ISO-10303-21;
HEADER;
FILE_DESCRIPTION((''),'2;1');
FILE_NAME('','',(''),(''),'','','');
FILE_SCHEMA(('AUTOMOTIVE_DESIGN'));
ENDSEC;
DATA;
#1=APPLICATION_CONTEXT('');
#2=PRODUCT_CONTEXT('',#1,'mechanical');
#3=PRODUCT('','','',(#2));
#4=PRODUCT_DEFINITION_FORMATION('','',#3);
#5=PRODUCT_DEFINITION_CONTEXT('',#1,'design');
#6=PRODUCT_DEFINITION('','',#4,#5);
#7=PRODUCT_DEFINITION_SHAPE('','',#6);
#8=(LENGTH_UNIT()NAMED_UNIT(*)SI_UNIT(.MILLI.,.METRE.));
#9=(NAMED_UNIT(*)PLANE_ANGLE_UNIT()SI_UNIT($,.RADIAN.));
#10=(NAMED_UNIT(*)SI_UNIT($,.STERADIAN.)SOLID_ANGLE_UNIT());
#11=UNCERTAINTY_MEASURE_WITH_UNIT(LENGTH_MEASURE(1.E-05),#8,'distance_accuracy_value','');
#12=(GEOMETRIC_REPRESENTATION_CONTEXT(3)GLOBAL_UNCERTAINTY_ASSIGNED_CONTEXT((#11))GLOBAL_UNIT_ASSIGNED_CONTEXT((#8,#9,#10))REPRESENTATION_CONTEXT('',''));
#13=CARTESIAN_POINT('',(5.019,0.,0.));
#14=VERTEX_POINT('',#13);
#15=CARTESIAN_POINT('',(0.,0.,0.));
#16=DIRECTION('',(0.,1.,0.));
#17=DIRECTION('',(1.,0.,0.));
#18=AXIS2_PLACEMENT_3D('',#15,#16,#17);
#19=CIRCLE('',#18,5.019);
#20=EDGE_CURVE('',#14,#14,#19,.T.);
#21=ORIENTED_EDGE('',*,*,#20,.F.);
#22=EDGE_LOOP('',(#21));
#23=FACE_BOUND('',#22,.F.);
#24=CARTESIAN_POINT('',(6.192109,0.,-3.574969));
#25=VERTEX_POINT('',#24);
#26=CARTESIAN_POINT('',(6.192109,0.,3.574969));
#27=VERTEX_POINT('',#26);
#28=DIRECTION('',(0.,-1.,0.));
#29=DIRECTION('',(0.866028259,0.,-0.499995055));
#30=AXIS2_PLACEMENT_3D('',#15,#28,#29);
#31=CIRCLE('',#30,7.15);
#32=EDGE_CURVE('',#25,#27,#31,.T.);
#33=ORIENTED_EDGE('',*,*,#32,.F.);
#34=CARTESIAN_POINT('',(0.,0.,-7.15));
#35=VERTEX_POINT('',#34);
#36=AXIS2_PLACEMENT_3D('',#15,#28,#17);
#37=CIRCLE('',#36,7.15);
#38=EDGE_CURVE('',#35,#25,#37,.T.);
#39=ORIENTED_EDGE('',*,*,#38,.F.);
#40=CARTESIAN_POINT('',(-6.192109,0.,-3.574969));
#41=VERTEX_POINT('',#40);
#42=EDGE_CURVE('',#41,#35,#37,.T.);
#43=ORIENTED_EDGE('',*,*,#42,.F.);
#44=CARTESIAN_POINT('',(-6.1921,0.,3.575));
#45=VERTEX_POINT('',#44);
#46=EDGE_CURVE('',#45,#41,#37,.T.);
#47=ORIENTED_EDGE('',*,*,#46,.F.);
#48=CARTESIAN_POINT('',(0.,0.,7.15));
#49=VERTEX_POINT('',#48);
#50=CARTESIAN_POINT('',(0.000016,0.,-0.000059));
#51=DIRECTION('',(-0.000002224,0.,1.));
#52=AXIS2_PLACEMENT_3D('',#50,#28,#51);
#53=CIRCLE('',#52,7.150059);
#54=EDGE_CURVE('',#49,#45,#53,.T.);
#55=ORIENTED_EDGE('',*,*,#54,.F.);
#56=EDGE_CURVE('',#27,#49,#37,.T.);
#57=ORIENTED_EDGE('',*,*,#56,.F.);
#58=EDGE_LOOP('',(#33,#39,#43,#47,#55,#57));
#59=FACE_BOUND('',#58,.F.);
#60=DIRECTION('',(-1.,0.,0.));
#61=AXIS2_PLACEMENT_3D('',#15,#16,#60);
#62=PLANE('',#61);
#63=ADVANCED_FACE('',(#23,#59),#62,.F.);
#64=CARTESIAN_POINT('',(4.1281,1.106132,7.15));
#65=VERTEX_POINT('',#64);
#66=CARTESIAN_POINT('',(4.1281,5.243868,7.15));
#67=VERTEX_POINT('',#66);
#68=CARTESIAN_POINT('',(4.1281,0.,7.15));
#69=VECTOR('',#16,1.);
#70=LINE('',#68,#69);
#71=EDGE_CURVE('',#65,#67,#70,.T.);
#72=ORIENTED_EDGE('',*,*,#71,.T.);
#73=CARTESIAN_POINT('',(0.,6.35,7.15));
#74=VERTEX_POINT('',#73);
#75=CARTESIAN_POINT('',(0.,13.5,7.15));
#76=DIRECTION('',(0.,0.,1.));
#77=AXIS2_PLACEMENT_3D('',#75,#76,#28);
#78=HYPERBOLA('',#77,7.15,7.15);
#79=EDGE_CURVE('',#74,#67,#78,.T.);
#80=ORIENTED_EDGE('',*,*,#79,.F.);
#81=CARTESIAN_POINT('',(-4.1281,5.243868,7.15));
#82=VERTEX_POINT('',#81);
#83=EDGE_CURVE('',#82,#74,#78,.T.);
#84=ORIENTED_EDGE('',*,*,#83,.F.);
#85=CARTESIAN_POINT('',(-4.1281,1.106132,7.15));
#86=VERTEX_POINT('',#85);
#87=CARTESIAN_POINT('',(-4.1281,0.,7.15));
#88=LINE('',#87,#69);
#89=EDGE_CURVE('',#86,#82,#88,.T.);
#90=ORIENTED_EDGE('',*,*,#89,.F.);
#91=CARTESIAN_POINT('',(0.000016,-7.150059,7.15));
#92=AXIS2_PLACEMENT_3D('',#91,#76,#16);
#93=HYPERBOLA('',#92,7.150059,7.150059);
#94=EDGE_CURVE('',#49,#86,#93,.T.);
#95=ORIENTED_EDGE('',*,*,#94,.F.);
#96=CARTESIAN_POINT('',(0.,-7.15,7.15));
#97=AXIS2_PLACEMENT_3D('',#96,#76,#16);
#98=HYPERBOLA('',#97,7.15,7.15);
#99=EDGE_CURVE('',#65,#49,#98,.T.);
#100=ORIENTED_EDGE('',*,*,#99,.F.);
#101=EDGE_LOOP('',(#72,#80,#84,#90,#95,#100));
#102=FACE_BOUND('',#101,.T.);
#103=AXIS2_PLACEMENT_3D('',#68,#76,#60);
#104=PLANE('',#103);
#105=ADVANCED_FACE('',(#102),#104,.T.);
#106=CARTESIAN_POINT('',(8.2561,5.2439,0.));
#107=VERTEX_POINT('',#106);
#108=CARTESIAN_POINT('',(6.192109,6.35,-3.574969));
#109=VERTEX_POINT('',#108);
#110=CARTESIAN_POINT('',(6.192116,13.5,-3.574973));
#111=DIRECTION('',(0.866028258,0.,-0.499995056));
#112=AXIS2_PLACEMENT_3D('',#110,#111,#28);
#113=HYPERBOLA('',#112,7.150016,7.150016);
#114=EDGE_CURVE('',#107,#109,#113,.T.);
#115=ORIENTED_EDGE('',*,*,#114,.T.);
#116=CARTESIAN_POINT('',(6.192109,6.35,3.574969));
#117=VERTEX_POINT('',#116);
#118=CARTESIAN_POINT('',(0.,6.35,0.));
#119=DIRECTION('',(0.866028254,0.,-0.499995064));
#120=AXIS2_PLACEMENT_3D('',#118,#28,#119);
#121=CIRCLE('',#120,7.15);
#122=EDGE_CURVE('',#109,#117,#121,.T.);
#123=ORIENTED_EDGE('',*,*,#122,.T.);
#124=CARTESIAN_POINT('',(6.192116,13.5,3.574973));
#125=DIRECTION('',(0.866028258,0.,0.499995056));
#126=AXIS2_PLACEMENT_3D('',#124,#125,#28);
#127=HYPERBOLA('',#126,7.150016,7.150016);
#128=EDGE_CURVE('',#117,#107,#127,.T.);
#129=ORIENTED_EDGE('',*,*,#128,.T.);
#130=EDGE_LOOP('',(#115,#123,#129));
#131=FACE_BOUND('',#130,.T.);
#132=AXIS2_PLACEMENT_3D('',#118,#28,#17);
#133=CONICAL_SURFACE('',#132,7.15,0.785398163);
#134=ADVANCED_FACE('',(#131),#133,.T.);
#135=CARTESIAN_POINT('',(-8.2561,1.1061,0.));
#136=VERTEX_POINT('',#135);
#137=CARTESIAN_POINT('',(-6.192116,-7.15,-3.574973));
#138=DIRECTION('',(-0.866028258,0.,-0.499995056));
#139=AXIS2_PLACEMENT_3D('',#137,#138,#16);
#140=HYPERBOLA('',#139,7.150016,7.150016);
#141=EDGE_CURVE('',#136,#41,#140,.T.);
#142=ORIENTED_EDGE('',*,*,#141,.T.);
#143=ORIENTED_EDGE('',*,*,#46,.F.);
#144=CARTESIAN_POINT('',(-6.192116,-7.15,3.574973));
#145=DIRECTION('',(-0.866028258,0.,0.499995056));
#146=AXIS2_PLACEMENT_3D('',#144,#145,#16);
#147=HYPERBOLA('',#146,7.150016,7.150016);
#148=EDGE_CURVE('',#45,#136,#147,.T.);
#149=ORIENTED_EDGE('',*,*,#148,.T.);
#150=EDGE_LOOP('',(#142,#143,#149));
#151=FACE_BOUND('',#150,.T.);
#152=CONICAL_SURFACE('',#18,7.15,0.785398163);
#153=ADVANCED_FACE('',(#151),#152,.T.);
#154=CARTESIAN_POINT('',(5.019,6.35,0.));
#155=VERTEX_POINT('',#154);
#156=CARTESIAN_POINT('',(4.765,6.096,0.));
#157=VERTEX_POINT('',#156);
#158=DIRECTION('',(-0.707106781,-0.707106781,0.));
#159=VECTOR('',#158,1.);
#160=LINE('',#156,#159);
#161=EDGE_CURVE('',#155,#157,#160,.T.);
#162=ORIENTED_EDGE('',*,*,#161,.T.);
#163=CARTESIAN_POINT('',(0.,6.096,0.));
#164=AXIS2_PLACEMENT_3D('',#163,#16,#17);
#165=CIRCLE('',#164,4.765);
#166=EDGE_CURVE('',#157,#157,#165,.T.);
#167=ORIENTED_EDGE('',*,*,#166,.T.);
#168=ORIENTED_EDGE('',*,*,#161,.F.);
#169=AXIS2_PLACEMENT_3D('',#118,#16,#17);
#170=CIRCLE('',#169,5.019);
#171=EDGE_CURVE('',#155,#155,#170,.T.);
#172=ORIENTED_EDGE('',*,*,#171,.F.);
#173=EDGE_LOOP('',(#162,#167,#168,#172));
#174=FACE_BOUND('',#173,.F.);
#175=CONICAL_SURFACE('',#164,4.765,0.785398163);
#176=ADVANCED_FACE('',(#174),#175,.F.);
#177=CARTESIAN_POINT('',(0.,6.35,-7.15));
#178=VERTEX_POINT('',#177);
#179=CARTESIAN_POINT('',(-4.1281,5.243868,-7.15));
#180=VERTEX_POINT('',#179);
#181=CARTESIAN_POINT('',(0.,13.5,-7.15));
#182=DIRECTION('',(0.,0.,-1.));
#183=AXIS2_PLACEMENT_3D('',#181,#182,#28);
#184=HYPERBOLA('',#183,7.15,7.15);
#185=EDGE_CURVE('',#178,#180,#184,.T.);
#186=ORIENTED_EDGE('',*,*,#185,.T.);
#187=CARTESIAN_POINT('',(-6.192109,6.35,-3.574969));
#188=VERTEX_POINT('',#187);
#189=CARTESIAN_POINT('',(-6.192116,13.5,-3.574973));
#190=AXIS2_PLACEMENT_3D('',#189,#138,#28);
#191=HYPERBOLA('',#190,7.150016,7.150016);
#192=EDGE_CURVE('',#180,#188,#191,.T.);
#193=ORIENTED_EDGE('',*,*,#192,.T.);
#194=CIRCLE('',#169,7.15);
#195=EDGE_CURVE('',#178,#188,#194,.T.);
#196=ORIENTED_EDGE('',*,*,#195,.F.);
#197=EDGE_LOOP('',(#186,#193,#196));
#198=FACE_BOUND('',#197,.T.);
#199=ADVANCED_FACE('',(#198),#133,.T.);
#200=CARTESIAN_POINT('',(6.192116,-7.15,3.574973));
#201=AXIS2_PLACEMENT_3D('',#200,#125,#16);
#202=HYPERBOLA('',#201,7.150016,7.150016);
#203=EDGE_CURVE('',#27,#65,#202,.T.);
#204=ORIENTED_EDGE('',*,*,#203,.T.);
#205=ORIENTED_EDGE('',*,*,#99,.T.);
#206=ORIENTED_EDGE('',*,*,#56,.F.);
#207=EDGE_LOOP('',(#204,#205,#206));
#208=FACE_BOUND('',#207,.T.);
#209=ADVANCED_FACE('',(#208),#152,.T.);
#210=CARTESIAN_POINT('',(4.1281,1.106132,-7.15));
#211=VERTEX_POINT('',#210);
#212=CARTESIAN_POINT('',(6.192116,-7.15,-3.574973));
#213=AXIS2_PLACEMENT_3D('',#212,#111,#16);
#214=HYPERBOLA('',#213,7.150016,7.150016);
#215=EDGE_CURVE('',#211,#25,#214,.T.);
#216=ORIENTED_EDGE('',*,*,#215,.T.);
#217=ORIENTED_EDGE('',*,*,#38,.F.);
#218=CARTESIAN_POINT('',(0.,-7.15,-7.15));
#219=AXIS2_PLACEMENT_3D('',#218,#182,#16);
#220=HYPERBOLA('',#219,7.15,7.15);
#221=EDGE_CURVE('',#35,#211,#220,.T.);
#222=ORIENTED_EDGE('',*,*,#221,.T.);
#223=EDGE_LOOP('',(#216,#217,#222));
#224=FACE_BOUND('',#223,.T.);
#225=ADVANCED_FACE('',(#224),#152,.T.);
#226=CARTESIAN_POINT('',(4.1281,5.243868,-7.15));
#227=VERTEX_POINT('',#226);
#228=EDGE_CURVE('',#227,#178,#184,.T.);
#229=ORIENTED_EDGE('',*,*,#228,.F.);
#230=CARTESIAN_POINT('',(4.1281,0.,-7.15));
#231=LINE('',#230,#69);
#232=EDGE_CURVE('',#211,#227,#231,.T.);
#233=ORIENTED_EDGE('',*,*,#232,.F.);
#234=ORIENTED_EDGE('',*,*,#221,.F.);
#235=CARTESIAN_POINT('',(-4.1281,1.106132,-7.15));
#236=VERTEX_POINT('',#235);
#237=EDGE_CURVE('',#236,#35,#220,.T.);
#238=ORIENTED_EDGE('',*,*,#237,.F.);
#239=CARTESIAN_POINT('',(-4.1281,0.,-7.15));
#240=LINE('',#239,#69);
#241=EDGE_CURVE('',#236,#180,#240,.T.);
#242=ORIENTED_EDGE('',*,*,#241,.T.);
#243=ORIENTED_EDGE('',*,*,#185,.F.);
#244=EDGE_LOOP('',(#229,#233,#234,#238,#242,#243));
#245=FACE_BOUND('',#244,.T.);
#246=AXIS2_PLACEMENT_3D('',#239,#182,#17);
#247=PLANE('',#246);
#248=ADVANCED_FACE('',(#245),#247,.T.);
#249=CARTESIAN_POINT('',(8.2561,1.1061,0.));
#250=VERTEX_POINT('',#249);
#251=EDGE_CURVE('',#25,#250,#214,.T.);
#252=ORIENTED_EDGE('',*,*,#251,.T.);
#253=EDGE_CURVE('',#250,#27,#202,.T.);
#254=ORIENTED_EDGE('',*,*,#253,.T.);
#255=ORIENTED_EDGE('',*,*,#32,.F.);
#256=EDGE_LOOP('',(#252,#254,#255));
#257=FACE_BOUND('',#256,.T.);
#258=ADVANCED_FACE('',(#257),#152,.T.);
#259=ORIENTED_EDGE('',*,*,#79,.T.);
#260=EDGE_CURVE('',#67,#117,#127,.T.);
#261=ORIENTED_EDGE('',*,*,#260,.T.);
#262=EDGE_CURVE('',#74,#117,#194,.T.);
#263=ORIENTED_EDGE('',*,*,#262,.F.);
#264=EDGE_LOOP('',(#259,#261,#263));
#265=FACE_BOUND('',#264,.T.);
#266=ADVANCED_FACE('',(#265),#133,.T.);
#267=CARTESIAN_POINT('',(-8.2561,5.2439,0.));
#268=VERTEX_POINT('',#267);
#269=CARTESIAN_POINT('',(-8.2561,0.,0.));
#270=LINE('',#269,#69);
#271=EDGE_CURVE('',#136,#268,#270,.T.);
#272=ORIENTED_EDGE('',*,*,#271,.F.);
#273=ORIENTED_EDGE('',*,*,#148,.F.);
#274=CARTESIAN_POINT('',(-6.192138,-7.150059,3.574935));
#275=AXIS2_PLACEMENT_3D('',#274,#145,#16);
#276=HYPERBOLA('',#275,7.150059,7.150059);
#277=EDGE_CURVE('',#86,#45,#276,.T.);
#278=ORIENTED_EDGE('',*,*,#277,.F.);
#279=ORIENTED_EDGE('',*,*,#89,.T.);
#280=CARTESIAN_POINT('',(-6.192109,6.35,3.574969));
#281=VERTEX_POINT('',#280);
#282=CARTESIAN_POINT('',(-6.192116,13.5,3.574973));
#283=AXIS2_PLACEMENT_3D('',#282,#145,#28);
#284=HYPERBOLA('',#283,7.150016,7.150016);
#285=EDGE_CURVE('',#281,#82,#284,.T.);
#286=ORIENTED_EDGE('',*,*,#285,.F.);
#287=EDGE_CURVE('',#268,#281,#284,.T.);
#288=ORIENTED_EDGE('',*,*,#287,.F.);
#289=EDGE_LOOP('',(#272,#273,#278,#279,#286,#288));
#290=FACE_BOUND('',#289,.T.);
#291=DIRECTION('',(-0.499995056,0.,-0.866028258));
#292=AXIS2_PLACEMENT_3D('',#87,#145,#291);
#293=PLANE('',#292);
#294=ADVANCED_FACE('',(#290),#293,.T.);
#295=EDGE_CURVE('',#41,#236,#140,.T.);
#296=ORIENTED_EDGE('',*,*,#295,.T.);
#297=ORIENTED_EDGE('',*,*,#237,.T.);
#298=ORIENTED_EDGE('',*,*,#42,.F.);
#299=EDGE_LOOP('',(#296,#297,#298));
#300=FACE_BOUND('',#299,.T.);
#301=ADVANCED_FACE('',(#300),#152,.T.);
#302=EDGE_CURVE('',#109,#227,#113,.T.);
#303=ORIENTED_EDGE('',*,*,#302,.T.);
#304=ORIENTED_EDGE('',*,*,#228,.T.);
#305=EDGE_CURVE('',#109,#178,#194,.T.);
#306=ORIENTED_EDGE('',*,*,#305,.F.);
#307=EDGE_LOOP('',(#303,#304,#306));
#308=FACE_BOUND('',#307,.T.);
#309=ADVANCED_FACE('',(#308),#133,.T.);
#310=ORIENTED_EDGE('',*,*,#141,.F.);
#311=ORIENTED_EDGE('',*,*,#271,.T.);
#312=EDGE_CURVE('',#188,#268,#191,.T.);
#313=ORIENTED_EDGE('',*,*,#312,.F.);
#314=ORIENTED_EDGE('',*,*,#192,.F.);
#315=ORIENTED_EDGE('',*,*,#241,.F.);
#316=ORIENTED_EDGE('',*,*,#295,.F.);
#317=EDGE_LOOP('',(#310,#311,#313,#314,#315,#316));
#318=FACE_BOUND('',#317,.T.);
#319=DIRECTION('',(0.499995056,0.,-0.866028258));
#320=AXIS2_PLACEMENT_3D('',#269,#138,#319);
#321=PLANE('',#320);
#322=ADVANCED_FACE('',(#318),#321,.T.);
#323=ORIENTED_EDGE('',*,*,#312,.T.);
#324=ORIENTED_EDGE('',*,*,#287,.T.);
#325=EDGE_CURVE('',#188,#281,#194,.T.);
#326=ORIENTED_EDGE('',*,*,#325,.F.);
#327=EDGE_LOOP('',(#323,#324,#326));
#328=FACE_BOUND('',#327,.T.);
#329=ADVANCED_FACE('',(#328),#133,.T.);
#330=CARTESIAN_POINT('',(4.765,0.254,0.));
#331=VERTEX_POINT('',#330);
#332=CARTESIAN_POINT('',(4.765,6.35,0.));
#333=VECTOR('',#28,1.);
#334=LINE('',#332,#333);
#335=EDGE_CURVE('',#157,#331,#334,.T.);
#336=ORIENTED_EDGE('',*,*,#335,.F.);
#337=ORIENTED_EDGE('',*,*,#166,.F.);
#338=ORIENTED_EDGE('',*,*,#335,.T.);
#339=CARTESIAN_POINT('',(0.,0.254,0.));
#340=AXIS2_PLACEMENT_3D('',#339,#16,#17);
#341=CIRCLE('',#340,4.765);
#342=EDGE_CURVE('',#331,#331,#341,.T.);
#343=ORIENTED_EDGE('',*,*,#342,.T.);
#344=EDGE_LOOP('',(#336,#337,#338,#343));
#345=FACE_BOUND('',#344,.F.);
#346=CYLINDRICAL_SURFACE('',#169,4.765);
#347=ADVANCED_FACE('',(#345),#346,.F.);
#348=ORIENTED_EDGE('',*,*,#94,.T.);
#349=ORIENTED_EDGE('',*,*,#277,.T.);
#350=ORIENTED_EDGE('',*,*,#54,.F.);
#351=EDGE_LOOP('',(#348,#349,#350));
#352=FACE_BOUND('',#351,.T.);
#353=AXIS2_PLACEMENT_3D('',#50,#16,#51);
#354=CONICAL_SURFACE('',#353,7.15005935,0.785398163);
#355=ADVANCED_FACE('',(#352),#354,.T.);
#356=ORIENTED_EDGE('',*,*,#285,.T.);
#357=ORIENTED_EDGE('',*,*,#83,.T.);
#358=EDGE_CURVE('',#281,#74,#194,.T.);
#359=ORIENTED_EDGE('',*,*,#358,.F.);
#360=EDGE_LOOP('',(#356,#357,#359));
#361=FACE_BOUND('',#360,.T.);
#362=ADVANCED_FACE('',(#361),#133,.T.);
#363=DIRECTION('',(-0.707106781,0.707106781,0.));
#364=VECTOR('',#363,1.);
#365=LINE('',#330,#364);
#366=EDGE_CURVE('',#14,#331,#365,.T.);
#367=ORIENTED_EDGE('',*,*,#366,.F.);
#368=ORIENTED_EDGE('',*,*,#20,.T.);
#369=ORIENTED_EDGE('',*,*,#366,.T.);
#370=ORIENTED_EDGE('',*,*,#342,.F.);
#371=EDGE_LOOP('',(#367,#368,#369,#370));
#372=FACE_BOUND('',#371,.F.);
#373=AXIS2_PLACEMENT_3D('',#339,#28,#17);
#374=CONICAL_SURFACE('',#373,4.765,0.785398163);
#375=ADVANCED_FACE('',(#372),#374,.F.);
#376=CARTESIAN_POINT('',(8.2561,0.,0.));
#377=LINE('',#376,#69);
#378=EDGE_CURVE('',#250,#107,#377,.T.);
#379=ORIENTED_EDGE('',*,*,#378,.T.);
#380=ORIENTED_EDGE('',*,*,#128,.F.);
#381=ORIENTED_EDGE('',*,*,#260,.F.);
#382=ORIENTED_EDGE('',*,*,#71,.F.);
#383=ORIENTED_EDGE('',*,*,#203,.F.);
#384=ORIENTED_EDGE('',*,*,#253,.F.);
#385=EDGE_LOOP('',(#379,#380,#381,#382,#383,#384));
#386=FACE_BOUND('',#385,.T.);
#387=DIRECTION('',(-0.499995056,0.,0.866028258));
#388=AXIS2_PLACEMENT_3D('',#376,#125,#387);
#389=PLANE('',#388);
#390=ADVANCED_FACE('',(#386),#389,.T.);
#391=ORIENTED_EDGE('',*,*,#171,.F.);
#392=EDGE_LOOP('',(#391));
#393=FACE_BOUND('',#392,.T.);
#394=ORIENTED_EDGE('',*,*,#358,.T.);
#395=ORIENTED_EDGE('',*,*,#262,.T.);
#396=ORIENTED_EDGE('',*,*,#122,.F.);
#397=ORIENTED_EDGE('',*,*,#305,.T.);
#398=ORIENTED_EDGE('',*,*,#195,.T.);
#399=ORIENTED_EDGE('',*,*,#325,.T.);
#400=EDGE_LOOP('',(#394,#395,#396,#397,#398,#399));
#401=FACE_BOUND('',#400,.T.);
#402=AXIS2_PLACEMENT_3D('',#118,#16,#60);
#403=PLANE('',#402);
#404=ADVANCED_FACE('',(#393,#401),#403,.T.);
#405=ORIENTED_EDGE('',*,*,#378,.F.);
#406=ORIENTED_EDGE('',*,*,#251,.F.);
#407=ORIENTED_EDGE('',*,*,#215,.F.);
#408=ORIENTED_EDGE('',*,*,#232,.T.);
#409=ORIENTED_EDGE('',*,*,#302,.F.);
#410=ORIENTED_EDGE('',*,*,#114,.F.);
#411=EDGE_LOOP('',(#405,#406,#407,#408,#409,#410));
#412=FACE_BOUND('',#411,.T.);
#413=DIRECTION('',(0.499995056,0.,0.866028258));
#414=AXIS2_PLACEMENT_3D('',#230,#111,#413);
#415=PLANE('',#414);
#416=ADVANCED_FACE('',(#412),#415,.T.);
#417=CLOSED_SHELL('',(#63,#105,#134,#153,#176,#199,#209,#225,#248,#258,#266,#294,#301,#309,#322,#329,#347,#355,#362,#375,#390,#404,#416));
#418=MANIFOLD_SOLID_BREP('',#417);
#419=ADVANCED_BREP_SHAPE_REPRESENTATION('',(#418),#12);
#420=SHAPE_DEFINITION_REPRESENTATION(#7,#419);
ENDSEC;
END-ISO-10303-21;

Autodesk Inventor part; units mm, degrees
ref_plane "YZ Plane" through (0, 0, 0) normal (1, 0, 0) x (0, 1, 0)
ref_plane "XZ Plane" through (0, 0, 0) normal (0, 1, 0) x (-1, 0, 0)
ref_plane "XY Plane" through (0, 0, 0) normal (0, 0, 1) x (1, 0, 0)
sketch "Sketch1" plane through (0, 0, 0) normal (0, 1, 0) x (-1, 0, 0)
  line L0 (8.2561, 0) -> (4.1281, -7.15)
  line L1 (4.1281, -7.15) -> (-4.1281, -7.15)
  line L2 (-4.1281, -7.15) -> (-8.2561, 0)
  line L3 (-8.2561, 0) -> (-4.1281, 7.15)
  line L4 (-4.1281, 7.15) -> (4.1281, 7.15)
  line L5 (4.1281, 7.15) -> (8.2561, 0)
  point P0 (0, 0)
  point P1 (0, 0)
  dimension "d0" = 14.3
extrude "Extrusion1" add sketch "Sketch1" along normal blind 6.35
sketch "Sketch2" plane through (0, 6.35, 0) normal (0, 1, 0) x (1, 0, 0)
  circle A0 centre (0, 0) radius 4.765
  dimension "d3" = 9.53
extrude "Extrusion2" cut sketch "Sketch2" against normal through all
thread "Thread1" size "M10x1.5" class "6H" standard "ANSI Metric M Profile" length 18.32
chamfer "Chamfer1" distance 0.254 angle 45 2 edges at (-4.765, 0, 0) (-4.765, 6.35, 0)
sketch "Sketch3" plane through (0, 6.35, 0) normal (0, 1, 0) x (1, 0, 0)
  circle A0 centre (0, 0) radius 7.15
  line L0 (-8.2561, 0) -> (-4.1281, -7.15) projected
extrude "Extrusion3" cut sketch "Sketch3" against normal blind 6.35 draft 45 keep common part
sketch "Sketch4" plane through (0, 0, 0) normal (0, -1, 0) x (1, 0, 0)
  arc A0 (0, 7.15) -> (-6.1921, 3.575) centre (0, 0) ccw projected
  circle A1 centre (0, 0) radius 7.15
  point P0 (0, 7.15)
extrude "Extrusion4" cut sketch "Sketch4" against normal blind 6.35 draft 45 keep common part
properties part number "Nut" material "Stainless Steel"
